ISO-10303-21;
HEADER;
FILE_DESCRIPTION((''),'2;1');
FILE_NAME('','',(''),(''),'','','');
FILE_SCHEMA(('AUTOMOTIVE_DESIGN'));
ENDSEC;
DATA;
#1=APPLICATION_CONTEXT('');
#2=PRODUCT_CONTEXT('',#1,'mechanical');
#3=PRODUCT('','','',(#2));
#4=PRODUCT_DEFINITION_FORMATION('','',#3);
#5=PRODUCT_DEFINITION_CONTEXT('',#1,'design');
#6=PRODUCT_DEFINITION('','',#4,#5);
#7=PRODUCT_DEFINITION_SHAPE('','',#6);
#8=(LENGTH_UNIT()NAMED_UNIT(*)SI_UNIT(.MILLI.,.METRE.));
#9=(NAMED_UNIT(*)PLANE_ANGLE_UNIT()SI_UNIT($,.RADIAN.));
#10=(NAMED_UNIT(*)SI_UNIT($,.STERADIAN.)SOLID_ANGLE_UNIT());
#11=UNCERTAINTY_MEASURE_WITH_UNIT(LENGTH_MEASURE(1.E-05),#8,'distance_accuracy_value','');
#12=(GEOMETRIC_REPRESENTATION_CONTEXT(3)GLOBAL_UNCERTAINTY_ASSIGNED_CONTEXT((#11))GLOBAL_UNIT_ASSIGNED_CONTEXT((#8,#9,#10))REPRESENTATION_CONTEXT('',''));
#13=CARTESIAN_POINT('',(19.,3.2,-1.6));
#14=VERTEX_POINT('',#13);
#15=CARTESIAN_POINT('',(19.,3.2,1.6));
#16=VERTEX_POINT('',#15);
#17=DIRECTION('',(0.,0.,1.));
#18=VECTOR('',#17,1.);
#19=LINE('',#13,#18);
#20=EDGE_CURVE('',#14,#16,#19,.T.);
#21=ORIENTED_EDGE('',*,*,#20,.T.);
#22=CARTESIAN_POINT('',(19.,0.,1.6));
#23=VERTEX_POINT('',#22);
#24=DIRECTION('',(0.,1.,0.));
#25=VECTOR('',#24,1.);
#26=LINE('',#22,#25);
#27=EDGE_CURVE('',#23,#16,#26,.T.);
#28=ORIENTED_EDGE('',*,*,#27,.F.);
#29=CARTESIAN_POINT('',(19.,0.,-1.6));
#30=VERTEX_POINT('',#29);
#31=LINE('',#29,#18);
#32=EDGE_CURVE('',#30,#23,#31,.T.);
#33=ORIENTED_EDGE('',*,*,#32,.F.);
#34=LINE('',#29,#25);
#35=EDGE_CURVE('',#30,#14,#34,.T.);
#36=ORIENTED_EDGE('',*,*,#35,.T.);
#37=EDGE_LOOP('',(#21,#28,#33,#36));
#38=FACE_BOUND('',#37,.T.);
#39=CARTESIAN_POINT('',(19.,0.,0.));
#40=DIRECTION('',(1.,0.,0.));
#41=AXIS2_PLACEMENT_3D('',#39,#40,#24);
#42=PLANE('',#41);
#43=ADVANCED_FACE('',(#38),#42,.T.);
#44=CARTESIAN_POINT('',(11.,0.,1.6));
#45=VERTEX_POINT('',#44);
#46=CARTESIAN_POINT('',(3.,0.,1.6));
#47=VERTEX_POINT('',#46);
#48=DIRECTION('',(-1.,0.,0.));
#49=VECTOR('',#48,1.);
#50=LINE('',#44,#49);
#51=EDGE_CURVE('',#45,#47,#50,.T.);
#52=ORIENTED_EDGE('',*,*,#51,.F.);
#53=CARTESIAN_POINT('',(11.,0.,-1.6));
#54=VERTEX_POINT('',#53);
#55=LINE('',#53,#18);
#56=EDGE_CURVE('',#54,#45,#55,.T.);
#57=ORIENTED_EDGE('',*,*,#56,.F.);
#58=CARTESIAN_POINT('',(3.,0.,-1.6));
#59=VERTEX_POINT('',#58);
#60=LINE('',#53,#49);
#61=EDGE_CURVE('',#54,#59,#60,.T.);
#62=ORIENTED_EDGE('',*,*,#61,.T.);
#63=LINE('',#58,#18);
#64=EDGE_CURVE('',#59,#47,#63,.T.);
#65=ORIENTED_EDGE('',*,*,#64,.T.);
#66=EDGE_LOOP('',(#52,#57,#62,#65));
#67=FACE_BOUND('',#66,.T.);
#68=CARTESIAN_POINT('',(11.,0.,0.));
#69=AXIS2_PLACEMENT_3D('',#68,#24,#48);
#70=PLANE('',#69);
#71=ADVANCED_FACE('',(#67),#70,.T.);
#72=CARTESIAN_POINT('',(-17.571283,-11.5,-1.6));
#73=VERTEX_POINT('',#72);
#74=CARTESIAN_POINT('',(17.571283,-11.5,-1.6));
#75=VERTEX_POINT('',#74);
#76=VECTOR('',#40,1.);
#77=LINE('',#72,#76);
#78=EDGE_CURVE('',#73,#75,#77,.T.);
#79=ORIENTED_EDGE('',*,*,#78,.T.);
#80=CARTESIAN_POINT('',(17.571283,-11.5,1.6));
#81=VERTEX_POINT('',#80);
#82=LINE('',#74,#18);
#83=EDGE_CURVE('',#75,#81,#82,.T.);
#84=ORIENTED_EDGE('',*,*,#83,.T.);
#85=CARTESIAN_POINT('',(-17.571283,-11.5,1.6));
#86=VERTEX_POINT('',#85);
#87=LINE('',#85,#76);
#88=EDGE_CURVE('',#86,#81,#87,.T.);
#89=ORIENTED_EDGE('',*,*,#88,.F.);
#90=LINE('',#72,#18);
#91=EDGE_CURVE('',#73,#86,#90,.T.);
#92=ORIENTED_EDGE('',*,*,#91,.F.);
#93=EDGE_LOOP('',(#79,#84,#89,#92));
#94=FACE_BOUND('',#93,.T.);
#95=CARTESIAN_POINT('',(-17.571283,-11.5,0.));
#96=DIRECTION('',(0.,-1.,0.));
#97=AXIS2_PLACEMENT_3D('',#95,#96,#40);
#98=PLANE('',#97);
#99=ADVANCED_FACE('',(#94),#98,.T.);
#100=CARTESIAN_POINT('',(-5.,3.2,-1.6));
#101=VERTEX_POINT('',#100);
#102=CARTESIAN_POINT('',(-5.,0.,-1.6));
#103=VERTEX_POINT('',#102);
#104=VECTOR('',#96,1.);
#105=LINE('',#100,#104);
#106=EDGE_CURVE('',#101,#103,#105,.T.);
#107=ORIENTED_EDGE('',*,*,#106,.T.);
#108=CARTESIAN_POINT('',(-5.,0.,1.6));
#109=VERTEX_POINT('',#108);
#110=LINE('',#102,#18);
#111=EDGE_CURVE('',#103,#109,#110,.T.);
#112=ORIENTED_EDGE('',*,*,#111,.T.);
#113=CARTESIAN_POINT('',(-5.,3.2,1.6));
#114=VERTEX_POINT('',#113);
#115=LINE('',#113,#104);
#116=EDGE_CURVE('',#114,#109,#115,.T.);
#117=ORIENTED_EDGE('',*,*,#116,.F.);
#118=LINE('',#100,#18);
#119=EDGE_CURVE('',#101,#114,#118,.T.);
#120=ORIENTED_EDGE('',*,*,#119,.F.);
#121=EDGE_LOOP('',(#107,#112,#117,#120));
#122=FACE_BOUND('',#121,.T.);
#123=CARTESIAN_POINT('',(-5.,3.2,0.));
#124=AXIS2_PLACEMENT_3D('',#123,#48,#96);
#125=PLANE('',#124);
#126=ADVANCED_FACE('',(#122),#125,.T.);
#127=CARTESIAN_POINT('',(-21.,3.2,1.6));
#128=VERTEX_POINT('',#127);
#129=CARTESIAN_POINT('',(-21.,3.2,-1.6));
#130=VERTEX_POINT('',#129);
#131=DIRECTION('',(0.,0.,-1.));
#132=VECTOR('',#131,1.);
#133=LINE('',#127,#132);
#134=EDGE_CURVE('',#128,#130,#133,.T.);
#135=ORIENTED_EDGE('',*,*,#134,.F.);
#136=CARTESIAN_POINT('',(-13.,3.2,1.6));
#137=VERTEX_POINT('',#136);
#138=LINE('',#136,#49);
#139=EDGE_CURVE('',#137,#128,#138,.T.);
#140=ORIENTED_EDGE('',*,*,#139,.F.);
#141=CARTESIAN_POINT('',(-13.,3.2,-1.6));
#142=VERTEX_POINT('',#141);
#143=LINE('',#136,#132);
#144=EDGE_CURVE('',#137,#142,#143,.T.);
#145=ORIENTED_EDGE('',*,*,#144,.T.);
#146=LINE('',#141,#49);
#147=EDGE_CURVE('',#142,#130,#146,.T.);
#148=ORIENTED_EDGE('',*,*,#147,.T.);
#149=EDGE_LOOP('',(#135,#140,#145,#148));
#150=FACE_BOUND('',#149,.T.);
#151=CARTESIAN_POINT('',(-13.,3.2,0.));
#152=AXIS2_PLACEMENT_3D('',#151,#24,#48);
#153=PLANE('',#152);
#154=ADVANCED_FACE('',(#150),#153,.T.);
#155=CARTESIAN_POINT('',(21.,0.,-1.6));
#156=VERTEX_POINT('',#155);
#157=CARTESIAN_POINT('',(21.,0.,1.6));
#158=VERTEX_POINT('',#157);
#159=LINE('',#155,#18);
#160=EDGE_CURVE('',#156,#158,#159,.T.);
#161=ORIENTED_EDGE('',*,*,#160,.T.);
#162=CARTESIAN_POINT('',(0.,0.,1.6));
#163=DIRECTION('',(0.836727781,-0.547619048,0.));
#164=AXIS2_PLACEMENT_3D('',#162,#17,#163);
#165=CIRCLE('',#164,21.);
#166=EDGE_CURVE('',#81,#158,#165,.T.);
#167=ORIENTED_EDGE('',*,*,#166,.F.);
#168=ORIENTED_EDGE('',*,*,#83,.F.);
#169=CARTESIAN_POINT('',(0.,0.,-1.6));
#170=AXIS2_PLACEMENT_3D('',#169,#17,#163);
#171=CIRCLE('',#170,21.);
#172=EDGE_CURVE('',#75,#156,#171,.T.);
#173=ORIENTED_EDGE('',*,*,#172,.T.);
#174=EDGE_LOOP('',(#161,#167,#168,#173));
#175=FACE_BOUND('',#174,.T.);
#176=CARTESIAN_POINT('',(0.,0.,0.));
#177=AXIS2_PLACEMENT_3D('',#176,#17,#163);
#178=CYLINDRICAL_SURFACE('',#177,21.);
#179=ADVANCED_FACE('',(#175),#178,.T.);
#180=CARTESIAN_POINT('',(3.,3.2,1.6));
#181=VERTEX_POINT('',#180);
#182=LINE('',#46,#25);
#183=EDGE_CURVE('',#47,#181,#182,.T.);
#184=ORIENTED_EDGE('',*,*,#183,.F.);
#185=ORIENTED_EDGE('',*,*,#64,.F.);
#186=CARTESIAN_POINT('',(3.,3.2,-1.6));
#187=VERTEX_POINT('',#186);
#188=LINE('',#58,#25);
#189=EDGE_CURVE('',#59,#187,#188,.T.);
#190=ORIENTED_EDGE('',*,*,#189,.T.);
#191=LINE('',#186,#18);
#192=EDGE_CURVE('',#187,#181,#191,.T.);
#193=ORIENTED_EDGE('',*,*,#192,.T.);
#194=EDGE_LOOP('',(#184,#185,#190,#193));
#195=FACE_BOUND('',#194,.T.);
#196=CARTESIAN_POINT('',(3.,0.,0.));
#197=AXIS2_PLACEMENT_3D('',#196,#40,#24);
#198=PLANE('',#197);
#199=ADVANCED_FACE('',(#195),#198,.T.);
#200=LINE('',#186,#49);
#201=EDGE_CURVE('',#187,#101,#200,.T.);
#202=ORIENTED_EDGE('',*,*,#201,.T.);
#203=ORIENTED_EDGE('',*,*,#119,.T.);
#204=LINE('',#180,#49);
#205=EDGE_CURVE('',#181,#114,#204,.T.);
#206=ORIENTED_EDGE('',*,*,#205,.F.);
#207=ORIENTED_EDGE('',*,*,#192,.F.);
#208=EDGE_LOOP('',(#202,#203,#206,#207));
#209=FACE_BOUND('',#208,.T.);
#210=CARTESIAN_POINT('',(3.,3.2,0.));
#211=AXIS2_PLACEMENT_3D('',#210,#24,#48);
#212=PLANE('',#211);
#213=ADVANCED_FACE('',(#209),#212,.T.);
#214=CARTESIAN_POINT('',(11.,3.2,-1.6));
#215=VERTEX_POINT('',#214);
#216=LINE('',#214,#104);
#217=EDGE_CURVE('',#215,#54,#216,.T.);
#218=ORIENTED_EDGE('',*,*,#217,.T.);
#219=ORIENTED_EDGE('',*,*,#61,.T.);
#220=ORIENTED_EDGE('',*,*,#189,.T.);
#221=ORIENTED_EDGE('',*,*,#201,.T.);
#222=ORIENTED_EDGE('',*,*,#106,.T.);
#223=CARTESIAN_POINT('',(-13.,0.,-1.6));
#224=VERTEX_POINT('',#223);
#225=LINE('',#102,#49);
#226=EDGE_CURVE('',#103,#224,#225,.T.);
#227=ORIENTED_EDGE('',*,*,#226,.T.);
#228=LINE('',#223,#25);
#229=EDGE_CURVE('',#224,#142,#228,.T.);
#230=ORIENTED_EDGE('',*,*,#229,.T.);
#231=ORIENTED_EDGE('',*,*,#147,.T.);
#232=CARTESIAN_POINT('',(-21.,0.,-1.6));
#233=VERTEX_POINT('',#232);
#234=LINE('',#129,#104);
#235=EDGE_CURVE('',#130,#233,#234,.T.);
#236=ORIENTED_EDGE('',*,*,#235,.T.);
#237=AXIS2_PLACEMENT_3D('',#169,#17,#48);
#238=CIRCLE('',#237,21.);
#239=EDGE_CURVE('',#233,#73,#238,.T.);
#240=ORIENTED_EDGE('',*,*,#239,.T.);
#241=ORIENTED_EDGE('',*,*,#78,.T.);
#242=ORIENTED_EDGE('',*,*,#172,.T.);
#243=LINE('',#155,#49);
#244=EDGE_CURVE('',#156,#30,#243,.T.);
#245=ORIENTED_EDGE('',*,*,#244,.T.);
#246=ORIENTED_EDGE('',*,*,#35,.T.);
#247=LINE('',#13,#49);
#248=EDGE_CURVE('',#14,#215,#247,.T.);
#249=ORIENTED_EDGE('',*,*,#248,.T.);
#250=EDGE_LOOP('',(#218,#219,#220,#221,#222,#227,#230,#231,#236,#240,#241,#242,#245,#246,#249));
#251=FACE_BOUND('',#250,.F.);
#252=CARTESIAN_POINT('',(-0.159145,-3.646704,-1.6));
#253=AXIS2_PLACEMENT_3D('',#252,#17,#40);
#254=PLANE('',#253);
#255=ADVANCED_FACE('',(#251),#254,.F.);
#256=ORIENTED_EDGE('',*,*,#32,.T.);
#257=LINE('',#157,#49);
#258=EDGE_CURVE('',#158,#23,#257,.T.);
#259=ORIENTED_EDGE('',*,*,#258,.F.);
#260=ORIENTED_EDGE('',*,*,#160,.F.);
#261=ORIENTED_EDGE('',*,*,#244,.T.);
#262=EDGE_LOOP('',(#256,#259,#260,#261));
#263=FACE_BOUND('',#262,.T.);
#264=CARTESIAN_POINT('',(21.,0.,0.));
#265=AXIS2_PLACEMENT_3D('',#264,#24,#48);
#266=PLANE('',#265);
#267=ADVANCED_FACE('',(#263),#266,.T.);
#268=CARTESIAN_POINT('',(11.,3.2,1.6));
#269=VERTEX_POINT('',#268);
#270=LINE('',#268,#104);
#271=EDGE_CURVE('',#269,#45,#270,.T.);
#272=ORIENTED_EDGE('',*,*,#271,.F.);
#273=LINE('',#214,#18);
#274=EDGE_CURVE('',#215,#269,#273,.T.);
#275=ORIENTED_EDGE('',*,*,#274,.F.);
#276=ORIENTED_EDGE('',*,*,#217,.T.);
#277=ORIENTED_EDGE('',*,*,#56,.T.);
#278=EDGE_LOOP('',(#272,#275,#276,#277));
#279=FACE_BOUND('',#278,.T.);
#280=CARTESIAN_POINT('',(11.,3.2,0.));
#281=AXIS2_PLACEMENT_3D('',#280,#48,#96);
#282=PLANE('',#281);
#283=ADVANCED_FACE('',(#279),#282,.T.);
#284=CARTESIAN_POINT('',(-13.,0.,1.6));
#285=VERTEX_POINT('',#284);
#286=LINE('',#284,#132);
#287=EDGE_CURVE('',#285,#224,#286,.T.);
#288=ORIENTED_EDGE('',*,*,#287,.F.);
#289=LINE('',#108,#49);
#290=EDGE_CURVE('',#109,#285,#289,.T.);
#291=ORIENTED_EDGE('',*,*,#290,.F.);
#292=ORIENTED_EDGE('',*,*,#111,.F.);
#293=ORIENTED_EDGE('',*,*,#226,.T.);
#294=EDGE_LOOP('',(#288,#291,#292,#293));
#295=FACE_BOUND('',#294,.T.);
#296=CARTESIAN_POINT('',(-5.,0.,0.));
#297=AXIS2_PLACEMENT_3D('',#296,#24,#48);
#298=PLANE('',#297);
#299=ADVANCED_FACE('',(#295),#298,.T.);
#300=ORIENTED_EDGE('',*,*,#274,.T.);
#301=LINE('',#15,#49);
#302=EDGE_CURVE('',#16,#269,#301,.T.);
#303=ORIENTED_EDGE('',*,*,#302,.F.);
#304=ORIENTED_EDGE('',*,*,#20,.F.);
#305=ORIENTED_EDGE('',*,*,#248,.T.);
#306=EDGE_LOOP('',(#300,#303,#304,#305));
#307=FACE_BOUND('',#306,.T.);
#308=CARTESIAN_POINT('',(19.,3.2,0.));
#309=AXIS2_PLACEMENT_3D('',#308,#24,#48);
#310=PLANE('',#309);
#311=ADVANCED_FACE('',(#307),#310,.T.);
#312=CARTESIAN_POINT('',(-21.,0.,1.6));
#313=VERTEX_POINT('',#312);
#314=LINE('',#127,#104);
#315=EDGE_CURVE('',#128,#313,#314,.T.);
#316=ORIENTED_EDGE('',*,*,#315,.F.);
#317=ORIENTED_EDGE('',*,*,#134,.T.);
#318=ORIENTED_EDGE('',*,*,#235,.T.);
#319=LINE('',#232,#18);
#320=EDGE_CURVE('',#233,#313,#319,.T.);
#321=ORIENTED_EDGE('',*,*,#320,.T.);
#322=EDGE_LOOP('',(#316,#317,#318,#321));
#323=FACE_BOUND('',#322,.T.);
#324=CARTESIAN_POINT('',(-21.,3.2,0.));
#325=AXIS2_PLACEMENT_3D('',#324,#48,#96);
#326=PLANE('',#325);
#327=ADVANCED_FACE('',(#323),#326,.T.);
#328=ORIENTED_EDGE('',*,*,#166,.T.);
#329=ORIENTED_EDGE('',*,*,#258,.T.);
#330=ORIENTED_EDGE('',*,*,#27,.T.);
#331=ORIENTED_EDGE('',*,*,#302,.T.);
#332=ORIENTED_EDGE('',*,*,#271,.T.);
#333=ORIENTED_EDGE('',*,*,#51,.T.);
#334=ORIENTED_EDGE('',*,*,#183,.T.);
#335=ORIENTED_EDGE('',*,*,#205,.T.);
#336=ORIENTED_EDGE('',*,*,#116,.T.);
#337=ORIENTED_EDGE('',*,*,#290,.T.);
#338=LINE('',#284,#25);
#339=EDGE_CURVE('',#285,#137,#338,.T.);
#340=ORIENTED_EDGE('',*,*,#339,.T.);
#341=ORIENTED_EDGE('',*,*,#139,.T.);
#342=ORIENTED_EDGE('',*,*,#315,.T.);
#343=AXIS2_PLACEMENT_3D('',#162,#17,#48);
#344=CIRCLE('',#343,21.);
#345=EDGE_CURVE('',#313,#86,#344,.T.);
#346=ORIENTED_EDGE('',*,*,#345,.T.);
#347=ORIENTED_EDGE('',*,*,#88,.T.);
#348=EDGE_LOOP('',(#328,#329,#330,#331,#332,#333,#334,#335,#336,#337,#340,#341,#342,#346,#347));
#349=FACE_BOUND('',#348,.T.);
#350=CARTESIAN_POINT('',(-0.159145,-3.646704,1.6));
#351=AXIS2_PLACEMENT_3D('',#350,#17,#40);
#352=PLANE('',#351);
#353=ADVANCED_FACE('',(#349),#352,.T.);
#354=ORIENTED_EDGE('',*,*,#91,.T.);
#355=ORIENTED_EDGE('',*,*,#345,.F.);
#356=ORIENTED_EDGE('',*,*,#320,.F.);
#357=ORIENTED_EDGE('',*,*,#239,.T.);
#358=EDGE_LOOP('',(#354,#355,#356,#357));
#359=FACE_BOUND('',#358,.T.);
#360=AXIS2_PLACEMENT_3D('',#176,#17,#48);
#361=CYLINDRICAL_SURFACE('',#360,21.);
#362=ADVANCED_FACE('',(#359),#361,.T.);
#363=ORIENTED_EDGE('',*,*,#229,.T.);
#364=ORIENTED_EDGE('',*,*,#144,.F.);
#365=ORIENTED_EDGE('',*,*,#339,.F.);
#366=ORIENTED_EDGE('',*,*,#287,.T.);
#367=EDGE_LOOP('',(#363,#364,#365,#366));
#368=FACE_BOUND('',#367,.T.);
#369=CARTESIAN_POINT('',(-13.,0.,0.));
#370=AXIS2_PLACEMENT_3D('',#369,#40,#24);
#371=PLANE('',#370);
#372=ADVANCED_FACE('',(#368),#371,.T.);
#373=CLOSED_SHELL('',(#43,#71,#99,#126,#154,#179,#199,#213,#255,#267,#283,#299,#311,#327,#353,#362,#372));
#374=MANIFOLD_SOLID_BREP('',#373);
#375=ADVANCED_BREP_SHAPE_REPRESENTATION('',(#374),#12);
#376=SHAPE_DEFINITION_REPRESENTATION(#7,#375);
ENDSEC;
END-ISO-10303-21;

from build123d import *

# Parameters (mm, degrees)
F1_DEPTH = 1.6


# Not quite as in the source:
# - a feature names something its author has since deleted; it is built from what else it names


with BuildPart() as f1:
    # F0 (on Top) → F1 (new body, symmetric)
    with BuildSketch(Plane.XY):
        with BuildLine():
            Line((-21, 3.2), (-21, 0))
            ThreePointArc((-21, 0), (-20.1245739235, -6.0001270317), (-17.5712833908, -11.5))
            Line((-17.5712833908, -11.5), (0, -11.5))
            Line((0, -11.5), (17.5712833908, -11.5))
            ThreePointArc((17.5712833908, -11.5), (20.1245739235, -6.0001270317), (21, 0))
            Line((21, 0), (19, 0))
            Line((19, 0), (19, 3.2))
            Line((19, 3.2), (11, 3.2))
            Line((11, 3.2), (11, 0))
            Line((11, 0), (3, 0))
            Line((3, 0), (3, 3.2))
            Line((3, 3.2), (-5, 3.2))
            Line((-5, 3.2), (-5, 0))
            Line((-5, 0), (-13, 0))
            Line((-13, 0), (-13, 3.2))
            Line((-13, 3.2), (-21, 3.2))
        make_face()
    extrude(amount=F1_DEPTH, both=True)


solid = f1.part
